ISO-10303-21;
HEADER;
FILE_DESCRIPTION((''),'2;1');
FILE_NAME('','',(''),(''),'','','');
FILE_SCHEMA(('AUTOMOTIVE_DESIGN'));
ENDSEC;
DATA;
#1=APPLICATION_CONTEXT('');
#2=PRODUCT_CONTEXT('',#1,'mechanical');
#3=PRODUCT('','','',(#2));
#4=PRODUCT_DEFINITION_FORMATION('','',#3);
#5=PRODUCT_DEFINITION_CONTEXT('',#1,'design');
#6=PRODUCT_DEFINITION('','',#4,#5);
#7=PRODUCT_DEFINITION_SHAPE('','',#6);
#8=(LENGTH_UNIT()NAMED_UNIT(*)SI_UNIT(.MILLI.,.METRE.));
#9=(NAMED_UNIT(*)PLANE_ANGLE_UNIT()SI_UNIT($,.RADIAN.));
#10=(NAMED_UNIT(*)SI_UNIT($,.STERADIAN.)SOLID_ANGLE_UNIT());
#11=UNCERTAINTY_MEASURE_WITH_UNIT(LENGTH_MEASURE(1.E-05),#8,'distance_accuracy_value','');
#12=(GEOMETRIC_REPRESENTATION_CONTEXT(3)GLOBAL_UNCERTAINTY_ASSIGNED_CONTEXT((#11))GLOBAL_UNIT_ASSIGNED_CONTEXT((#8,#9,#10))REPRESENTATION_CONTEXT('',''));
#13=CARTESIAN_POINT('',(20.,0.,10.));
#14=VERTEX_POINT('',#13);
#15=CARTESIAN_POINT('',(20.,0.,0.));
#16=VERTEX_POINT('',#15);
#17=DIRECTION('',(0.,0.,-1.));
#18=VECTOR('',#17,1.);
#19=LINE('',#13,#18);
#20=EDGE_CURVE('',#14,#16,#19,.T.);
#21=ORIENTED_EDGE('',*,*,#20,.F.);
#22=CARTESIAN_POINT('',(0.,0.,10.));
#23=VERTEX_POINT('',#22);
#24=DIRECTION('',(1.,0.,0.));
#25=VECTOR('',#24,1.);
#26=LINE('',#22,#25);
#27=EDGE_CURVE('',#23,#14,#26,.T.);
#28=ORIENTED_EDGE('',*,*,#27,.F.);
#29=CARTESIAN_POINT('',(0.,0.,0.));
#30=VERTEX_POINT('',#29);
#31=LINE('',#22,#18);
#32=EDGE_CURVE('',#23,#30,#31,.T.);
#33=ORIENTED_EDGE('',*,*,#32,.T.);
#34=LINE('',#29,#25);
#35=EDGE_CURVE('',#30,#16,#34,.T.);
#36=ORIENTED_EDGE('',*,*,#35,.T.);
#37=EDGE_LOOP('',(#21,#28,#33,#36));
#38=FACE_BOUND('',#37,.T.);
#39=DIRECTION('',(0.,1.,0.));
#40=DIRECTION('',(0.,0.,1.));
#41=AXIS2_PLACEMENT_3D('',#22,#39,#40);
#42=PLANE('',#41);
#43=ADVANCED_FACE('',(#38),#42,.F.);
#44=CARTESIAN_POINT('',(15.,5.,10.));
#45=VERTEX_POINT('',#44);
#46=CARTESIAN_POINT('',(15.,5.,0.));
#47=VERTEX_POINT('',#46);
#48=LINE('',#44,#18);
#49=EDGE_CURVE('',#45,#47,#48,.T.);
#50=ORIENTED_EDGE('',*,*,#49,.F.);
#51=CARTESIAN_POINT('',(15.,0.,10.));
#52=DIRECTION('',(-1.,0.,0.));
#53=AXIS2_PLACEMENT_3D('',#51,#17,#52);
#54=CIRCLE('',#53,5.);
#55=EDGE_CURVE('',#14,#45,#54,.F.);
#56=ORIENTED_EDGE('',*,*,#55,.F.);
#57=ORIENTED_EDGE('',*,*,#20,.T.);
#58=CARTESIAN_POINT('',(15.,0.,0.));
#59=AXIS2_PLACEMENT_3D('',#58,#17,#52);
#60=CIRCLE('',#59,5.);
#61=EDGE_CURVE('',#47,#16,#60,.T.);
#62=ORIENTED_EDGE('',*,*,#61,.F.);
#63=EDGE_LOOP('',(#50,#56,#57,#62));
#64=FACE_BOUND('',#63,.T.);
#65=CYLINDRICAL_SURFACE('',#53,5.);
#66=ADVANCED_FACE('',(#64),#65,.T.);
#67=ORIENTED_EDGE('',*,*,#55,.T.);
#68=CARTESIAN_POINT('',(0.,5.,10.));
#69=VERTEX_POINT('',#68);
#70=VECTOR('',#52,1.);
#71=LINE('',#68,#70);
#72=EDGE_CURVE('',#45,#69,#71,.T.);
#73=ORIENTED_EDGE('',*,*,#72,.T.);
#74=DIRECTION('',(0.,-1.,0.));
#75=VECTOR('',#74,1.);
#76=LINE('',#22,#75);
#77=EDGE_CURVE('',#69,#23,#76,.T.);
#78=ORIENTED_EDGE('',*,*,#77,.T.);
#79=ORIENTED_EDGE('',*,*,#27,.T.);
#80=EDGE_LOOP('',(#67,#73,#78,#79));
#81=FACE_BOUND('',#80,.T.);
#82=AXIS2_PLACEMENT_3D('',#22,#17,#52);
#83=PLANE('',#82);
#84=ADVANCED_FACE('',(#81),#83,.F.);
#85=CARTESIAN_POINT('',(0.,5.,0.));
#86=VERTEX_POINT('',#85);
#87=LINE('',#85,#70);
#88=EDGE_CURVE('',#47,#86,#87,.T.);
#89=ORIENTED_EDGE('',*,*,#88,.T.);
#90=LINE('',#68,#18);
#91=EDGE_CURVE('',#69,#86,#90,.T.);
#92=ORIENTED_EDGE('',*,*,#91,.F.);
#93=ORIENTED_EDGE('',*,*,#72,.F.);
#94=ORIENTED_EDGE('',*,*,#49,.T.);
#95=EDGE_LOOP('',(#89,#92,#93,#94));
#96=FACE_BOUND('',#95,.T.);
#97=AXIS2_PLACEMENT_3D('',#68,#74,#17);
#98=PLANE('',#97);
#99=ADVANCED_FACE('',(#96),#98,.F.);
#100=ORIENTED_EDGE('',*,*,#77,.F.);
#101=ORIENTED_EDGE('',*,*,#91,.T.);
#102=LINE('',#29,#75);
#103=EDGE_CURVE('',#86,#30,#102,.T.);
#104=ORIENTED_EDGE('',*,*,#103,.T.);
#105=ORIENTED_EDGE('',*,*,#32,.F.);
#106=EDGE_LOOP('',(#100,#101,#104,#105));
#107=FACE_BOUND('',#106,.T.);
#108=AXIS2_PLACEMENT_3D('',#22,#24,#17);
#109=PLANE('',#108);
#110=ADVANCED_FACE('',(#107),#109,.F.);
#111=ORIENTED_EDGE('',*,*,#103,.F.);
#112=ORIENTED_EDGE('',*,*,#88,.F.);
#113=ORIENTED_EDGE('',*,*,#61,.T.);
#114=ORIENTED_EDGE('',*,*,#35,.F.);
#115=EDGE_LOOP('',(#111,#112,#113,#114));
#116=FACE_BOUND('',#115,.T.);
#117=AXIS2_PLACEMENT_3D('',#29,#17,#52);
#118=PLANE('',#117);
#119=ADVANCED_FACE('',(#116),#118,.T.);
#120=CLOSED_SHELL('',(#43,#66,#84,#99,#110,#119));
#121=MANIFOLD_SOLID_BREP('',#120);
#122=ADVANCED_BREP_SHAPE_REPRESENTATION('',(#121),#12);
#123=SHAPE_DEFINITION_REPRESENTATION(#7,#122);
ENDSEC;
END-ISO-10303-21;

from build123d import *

# Parameters (mm, degrees)
ESQUISSE1_W        = 20
ESQUISSE1_H        = 5
BOSS_EXTRU_1_DEPTH = 10
CONG_1_R           = 5


with BuildPart() as part:
    # Esquisse1 → Boss.-Extru.1 (new body)
    with BuildSketch(Plane.XY):
        with Locations((10, 2.5)):
            Rectangle(ESQUISSE1_W, ESQUISSE1_H)
    extrude(amount=BOSS_EXTRU_1_DEPTH)

    # Congé1
    cong_1_edges = [part.edges().sort_by_distance(p)[0] for p in [
        (20, 5, 5),
    ]]
    fillet(cong_1_edges, radius=CONG_1_R - 0.0001)  # a hair under: the kernel refuses the full size


solid = part.part
